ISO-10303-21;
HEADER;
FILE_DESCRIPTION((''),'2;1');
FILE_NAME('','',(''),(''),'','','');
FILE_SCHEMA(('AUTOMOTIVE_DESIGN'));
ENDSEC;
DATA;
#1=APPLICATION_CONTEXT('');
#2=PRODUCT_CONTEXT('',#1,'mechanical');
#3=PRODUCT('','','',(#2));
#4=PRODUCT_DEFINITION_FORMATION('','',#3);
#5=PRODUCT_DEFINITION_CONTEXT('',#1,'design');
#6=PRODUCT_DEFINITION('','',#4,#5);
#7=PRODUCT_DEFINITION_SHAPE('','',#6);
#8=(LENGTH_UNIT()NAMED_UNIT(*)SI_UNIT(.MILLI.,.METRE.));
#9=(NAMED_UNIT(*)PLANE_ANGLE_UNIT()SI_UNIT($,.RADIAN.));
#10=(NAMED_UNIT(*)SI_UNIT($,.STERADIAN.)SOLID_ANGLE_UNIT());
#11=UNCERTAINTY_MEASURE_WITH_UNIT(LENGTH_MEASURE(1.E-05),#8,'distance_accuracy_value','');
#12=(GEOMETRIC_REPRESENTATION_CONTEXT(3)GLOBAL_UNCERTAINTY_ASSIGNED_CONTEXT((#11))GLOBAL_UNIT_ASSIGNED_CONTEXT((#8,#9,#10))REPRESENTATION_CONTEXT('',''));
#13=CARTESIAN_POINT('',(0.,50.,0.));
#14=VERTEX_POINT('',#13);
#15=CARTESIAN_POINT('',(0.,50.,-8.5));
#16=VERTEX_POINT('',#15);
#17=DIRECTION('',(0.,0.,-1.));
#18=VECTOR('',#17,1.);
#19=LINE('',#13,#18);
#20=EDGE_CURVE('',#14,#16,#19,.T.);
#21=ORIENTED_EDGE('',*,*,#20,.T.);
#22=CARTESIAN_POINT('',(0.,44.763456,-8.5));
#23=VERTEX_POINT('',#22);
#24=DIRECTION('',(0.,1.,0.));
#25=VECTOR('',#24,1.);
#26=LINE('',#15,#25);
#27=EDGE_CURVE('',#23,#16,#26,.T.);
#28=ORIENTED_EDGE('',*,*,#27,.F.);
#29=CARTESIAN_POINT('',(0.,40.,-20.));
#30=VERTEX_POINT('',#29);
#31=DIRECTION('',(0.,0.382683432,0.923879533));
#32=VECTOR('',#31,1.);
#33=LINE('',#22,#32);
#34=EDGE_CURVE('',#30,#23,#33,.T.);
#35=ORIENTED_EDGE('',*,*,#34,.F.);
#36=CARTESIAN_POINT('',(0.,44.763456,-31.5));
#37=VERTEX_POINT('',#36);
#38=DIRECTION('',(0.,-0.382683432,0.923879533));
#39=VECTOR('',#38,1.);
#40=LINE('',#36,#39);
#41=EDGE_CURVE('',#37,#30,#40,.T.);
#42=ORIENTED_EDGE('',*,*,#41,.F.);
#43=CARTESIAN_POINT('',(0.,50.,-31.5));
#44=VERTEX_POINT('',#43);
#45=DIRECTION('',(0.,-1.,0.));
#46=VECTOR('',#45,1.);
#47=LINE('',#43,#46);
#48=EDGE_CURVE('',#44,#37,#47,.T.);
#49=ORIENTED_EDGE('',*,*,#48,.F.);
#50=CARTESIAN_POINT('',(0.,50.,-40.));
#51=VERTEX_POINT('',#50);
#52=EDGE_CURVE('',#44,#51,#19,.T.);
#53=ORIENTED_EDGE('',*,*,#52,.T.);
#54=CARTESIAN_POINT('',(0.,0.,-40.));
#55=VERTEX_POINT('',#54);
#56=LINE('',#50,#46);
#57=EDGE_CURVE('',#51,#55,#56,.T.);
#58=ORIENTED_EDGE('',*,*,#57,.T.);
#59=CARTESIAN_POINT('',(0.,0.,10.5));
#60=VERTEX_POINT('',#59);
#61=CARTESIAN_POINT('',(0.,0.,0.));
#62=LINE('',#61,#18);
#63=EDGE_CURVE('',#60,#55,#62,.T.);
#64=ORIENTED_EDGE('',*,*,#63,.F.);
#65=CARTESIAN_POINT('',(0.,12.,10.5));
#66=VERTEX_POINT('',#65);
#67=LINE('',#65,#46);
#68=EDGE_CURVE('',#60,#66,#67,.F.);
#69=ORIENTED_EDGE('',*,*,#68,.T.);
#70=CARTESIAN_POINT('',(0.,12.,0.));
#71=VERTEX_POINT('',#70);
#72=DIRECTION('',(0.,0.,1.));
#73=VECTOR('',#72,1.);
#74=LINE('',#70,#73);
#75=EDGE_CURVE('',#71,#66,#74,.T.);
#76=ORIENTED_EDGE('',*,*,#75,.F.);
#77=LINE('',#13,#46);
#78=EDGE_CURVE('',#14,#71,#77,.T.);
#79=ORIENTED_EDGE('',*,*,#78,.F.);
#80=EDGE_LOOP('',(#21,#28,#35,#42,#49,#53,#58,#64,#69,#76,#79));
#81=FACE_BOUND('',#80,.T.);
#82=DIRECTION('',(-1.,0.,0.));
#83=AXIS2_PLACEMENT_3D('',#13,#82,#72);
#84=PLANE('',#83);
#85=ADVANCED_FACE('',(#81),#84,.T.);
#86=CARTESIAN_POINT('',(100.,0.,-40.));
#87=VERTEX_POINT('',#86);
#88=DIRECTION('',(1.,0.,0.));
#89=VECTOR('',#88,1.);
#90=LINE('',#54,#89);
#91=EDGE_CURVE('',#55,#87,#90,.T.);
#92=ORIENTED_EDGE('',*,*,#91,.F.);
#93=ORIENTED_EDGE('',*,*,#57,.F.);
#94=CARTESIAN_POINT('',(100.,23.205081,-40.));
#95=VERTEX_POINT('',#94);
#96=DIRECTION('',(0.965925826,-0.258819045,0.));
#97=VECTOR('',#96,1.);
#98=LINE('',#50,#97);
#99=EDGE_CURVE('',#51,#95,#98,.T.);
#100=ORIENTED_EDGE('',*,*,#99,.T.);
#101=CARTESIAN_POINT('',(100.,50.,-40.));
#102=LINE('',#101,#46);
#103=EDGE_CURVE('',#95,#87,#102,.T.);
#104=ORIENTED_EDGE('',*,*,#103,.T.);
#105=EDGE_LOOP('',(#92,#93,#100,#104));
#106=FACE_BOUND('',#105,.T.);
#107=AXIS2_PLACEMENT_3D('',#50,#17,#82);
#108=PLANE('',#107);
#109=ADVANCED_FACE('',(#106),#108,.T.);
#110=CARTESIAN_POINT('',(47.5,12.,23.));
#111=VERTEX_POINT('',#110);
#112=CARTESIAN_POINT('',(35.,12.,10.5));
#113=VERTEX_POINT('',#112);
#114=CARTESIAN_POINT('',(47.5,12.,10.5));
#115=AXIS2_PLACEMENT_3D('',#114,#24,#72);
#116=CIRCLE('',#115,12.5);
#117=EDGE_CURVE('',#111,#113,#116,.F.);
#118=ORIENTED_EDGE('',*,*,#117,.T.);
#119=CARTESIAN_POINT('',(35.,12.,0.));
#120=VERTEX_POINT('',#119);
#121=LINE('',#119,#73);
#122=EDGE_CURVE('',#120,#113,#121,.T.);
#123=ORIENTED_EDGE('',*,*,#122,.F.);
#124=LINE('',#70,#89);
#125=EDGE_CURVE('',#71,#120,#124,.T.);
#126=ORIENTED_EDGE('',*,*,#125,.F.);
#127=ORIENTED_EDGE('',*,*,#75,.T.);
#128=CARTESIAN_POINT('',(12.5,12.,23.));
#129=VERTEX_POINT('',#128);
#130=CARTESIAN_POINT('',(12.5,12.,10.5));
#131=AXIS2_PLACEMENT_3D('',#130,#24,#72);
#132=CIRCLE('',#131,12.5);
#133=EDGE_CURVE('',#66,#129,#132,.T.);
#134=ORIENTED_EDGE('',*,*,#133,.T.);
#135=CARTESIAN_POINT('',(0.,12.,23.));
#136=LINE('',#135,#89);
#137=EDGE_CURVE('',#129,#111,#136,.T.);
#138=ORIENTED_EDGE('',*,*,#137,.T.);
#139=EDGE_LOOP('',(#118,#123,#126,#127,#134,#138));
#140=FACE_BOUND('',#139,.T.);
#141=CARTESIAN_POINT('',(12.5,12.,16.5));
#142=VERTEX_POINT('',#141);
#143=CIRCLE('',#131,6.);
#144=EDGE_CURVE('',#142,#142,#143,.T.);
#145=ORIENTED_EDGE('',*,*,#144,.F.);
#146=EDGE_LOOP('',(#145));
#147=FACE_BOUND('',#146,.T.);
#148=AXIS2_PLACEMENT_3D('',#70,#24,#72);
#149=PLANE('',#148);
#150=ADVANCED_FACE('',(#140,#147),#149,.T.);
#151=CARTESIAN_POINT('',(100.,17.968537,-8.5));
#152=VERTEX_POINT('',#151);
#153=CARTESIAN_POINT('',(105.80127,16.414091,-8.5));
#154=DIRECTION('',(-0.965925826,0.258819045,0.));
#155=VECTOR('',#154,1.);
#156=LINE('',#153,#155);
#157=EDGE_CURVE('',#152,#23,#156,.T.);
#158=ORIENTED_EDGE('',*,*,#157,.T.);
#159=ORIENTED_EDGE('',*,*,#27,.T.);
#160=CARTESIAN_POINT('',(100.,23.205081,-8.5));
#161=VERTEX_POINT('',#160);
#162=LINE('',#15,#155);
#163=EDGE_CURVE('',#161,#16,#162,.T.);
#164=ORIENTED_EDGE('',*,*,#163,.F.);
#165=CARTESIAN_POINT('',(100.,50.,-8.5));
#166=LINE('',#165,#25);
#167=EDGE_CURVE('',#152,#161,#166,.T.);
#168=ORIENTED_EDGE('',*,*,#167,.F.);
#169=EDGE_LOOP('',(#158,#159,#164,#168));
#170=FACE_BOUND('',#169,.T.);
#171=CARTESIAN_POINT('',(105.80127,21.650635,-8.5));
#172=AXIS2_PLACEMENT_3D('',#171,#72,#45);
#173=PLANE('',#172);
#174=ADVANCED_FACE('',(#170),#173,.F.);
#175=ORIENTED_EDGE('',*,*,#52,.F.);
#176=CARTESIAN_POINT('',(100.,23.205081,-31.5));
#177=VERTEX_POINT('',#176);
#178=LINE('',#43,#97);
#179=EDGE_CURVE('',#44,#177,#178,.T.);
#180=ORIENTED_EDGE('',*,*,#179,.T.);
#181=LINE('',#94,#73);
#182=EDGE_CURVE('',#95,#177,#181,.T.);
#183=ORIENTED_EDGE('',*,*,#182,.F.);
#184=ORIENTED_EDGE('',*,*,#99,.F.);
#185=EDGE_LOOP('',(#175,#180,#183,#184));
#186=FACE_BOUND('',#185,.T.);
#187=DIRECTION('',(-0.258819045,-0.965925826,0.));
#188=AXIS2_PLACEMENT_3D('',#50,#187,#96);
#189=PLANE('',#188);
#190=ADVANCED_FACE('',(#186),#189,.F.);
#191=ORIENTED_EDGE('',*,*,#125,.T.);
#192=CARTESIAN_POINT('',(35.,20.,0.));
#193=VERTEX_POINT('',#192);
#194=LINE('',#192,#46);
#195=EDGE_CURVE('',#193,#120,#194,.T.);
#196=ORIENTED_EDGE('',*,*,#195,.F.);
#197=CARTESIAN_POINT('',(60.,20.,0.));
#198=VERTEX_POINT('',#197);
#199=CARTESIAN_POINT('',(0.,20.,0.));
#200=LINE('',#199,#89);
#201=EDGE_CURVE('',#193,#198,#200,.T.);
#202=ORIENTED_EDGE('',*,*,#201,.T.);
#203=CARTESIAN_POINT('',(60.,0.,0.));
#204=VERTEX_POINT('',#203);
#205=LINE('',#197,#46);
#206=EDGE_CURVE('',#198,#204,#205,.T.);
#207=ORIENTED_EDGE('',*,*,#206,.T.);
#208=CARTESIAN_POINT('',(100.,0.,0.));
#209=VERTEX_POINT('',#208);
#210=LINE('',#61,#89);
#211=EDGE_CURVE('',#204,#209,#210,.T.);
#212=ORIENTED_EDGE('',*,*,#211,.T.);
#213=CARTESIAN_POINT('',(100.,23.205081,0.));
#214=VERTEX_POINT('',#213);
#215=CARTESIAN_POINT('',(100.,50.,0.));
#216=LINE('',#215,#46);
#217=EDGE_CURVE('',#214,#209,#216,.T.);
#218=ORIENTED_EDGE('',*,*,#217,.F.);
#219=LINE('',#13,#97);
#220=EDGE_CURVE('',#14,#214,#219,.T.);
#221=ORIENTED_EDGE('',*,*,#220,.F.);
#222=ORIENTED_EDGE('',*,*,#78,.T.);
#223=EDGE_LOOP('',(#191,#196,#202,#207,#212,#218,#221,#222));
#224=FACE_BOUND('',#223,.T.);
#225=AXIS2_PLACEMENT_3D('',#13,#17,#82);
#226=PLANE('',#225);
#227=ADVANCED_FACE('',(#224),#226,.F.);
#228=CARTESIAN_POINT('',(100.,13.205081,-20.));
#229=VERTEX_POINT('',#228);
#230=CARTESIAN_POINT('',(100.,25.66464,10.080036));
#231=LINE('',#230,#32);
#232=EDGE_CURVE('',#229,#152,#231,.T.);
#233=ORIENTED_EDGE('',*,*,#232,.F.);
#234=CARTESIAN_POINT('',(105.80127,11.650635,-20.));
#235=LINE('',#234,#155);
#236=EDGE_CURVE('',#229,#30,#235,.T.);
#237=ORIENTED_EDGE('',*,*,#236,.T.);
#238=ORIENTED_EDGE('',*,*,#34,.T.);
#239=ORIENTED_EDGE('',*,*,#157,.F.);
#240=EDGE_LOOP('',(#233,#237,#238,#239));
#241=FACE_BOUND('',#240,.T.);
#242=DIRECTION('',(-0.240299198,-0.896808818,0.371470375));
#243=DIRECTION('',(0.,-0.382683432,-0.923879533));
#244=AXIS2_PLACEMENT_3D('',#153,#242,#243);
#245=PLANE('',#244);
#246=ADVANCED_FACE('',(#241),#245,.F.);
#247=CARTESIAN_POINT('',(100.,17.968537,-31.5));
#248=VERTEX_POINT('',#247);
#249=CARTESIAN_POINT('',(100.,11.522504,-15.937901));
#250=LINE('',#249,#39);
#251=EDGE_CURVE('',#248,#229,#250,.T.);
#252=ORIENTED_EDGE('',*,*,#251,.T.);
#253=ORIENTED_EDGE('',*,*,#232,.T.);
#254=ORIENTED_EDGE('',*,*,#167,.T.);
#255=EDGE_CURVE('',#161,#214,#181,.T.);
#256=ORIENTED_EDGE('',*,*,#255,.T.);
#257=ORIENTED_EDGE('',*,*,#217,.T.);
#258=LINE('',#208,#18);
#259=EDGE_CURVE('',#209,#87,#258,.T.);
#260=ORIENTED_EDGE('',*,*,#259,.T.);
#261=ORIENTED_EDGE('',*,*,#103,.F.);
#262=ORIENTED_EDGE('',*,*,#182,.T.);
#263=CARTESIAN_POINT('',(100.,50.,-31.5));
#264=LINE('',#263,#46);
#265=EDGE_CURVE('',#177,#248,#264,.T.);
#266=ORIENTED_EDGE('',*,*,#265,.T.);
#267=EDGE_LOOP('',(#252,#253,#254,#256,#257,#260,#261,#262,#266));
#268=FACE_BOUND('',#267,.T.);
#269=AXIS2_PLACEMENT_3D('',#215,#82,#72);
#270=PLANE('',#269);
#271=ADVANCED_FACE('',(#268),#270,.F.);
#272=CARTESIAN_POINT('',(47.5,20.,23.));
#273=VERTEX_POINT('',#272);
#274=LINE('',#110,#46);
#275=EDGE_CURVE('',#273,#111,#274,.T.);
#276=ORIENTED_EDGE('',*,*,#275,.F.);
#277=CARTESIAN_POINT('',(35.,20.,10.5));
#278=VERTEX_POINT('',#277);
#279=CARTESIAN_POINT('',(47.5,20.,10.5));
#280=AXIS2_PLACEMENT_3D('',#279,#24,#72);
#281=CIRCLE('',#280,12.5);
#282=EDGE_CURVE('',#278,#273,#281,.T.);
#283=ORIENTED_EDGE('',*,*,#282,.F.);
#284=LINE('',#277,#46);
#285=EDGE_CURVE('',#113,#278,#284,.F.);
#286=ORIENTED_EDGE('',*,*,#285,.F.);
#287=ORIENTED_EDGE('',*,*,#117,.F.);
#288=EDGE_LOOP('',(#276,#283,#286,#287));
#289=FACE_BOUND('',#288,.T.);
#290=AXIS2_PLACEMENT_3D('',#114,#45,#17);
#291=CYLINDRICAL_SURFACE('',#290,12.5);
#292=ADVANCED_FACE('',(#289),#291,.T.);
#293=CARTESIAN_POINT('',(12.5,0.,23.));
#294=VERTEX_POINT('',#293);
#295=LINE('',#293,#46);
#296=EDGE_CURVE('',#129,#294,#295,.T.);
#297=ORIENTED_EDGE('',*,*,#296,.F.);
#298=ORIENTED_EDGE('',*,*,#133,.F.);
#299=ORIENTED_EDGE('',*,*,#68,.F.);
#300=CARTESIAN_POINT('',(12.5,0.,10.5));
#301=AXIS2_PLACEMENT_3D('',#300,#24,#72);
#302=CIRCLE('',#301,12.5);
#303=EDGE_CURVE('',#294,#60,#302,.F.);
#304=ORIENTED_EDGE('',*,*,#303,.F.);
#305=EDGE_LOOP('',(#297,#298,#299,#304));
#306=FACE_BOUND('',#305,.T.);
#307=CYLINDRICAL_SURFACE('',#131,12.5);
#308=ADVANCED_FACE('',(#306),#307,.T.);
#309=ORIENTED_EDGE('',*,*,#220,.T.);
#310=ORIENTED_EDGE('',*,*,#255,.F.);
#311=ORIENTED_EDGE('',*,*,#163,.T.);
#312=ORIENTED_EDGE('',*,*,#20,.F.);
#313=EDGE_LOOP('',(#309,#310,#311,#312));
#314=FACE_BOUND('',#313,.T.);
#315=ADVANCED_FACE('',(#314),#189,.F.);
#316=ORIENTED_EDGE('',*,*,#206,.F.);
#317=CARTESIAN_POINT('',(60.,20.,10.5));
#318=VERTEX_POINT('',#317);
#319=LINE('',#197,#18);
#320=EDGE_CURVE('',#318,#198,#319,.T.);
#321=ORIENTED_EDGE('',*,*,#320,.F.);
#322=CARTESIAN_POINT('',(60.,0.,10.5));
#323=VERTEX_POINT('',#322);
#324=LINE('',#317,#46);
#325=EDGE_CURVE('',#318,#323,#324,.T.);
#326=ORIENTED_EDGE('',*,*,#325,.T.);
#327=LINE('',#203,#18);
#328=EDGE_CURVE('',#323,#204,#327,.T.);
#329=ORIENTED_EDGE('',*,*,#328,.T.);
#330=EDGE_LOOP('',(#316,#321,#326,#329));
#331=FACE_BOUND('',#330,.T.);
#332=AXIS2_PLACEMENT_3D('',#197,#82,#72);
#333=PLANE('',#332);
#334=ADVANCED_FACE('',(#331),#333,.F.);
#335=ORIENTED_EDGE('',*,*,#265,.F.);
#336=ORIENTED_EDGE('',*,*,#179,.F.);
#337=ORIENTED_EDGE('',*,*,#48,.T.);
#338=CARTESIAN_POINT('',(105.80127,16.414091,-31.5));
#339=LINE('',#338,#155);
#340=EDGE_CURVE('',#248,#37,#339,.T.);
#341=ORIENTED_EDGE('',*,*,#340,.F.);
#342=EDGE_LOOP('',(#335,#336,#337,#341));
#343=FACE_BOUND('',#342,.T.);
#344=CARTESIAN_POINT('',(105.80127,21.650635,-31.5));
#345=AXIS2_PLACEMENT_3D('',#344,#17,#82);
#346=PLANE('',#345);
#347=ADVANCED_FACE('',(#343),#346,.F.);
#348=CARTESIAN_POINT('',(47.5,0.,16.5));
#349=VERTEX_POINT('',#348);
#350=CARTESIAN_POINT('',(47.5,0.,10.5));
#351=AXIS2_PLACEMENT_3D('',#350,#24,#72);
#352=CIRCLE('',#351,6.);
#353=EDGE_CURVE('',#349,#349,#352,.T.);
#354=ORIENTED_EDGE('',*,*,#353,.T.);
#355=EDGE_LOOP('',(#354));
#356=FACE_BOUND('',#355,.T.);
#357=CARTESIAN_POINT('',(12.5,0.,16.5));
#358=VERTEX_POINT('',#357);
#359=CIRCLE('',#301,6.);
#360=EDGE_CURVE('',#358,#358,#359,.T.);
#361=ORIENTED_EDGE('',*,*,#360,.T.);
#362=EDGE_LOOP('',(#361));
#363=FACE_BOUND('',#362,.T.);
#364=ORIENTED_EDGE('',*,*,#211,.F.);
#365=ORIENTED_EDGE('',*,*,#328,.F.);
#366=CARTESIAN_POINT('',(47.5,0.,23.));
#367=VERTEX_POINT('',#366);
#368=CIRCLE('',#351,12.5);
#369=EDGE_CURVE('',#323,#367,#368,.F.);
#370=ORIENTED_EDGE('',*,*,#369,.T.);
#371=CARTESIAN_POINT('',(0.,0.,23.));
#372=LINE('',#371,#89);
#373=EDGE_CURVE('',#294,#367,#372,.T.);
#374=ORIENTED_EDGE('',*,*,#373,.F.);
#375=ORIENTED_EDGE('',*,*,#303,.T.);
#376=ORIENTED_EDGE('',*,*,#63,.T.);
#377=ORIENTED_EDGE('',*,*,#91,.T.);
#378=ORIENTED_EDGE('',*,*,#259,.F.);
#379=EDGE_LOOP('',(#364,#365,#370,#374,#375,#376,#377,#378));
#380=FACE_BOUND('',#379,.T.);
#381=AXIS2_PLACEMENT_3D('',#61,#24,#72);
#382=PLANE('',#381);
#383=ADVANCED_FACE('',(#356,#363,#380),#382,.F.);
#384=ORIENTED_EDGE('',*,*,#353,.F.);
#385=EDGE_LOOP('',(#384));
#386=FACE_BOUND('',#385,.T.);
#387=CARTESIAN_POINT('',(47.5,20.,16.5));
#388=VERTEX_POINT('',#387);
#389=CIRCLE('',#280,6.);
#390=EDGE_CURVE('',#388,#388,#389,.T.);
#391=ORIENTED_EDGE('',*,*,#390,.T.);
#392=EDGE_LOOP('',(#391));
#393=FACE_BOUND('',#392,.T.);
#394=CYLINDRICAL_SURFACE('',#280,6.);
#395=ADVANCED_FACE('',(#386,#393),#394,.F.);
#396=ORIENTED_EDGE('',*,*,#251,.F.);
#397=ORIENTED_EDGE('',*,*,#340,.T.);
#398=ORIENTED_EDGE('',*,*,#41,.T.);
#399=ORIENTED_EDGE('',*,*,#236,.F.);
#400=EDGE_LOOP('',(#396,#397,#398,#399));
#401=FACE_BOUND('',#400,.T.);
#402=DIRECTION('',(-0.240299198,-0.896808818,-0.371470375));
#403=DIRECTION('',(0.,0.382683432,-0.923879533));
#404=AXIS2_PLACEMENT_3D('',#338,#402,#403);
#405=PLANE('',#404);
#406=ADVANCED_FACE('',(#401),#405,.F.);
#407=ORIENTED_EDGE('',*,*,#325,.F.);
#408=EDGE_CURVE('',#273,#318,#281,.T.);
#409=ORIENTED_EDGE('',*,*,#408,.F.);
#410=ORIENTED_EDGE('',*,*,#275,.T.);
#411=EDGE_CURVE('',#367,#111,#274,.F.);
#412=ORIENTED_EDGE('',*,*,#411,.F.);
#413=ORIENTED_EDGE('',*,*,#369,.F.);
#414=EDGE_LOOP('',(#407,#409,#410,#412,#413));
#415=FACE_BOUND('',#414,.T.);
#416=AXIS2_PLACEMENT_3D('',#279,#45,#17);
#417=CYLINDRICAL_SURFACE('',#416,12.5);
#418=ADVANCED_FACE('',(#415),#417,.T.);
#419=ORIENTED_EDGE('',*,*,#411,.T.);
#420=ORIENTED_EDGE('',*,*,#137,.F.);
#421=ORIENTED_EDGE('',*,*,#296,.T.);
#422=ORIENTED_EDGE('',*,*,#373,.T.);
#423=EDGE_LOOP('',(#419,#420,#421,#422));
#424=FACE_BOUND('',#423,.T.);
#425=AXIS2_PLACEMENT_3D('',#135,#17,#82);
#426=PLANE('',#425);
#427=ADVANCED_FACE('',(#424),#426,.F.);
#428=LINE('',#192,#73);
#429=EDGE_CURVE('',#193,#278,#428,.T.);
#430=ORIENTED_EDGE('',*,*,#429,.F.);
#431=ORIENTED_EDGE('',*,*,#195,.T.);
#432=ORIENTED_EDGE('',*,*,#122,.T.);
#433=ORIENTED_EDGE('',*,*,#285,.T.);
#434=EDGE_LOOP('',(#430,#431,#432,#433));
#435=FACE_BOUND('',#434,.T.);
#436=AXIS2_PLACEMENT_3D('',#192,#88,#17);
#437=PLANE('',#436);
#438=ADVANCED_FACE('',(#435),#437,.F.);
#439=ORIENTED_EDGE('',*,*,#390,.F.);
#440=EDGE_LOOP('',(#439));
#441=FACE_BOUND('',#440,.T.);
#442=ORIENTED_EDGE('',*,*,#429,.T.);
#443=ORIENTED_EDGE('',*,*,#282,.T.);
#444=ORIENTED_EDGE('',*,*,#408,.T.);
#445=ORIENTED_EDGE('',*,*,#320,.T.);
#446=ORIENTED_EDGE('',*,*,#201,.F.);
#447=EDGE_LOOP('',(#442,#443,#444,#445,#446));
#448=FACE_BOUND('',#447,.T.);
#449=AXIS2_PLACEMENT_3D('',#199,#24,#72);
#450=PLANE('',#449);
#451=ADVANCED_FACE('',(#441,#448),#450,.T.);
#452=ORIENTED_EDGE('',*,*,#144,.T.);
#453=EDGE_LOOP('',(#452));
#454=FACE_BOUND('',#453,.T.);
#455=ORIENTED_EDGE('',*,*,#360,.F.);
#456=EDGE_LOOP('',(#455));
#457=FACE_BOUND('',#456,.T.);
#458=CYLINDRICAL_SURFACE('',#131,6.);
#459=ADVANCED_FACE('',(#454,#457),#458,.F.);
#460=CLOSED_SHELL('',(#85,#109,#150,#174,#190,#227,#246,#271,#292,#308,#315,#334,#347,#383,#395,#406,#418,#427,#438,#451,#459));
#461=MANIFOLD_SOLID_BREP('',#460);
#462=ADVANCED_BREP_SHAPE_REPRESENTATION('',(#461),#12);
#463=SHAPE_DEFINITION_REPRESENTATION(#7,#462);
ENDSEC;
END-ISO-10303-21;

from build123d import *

# Parameters (mm, degrees)
SKETCH1_W                            = 100
SKETCH1_H                            = 40
BOSS_EXTRUDE1_DEPTH                  = 50
SKETCH1_4_W                          = 35
SKETCH1_4_H                          = 23
BOSS_EXTRUDE2_DEPTH                  = 12
SKETCH1_5_W                          = 25
SKETCH1_5_H                          = 23
BOSS_EXTRUDE3_DEPTH                  = 20
FILLET1_R                            = 12.5
CUT_EXTRUDE1_DEPTH                   = 119.74342087
CUT_EXTRUDE2_DEPTH                   = 123.967511388
F_12_0_12_DIAMETER_HOLE1_D           = 12
F_12_0_12_DIAMETER_HOLE1_ON_FACE_2_D = 12


with BuildPart() as part:
    # Sketch1 → Boss-Extrude1 (new body)
    with BuildSketch(Plane(origin=(0, 0, 0), x_dir=(1, 0, 0), z_dir=(0, 1, 0))):
        with Locations((50, 20)):
            Rectangle(SKETCH1_W, SKETCH1_H)
    extrude(amount=BOSS_EXTRUDE1_DEPTH)

    # Sketch1<4> → Boss-Extrude2 (add)
    with BuildSketch(Plane(origin=(0, 0, 0), x_dir=(1, 0, 0), z_dir=(0, 1, 0))):
        with Locations((17.5, -11.5)):
            Rectangle(SKETCH1_4_W, SKETCH1_4_H)
    extrude(amount=BOSS_EXTRUDE2_DEPTH)

    # Sketch1<5> → Boss-Extrude3 (add)
    with BuildSketch(Plane(origin=(0, 0, 0), x_dir=(1, 0, 0), z_dir=(0, 1, 0))):
        with Locations((47.5, -11.5)):
            Rectangle(SKETCH1_5_W, SKETCH1_5_H)
    extrude(amount=BOSS_EXTRUDE3_DEPTH)

    # Fillet1
    fillet1_edges = [part.edges().sort_by_distance(p)[0] for p in [
        (60, 10, 23),
        (35, 16, 23),
        (0, 6, 23),
    ]]
    fillet(fillet1_edges, radius=FILLET1_R - 0.0001)  # a hair under: the kernel refuses the full size

    # Sketch2 → Cut-Extrude1 (cut, through all)
    with BuildSketch(Plane.XY):
        Polygon((0, 50), (100, 23.205080757), (100, 50), align=None)
    extrude(amount=-CUT_EXTRUDE1_DEPTH, mode=Mode.SUBTRACT)

    # Sketch4 → Cut-Extrude2 (cut, through all, along a direction that is not the sketch's normal)
    with BuildSketch(Plane.ZY):
        Polygon((-31.5, 50), (-31.5, 44.763455967), (-20, 40), (-8.5, 44.763455967), (-8.5, 50), align=None)
    extrude(amount=-CUT_EXTRUDE2_DEPTH, dir=(-0.9659258262890701, 0.2588190451025143, 0), mode=Mode.SUBTRACT)

    # Ø12.0 (12) Diameter Hole1 (through all)
    with Locations(Plane(origin=(12.5, 12, 10.5), x_dir=(0, 0, 1), z_dir=(0, 1, 0))):
        with Locations((0, 0)):
            Hole(F_12_0_12_DIAMETER_HOLE1_D / 2)

    # Ø12.0 (12) Diameter Hole1 on face 2 (through all)
    with Locations(Plane(origin=(47.5, 20, 10.5), x_dir=(0, 0, 1), z_dir=(0, 1, 0))):
        with Locations((0, 0)):
            Hole(F_12_0_12_DIAMETER_HOLE1_ON_FACE_2_D / 2)


solid = part.part
